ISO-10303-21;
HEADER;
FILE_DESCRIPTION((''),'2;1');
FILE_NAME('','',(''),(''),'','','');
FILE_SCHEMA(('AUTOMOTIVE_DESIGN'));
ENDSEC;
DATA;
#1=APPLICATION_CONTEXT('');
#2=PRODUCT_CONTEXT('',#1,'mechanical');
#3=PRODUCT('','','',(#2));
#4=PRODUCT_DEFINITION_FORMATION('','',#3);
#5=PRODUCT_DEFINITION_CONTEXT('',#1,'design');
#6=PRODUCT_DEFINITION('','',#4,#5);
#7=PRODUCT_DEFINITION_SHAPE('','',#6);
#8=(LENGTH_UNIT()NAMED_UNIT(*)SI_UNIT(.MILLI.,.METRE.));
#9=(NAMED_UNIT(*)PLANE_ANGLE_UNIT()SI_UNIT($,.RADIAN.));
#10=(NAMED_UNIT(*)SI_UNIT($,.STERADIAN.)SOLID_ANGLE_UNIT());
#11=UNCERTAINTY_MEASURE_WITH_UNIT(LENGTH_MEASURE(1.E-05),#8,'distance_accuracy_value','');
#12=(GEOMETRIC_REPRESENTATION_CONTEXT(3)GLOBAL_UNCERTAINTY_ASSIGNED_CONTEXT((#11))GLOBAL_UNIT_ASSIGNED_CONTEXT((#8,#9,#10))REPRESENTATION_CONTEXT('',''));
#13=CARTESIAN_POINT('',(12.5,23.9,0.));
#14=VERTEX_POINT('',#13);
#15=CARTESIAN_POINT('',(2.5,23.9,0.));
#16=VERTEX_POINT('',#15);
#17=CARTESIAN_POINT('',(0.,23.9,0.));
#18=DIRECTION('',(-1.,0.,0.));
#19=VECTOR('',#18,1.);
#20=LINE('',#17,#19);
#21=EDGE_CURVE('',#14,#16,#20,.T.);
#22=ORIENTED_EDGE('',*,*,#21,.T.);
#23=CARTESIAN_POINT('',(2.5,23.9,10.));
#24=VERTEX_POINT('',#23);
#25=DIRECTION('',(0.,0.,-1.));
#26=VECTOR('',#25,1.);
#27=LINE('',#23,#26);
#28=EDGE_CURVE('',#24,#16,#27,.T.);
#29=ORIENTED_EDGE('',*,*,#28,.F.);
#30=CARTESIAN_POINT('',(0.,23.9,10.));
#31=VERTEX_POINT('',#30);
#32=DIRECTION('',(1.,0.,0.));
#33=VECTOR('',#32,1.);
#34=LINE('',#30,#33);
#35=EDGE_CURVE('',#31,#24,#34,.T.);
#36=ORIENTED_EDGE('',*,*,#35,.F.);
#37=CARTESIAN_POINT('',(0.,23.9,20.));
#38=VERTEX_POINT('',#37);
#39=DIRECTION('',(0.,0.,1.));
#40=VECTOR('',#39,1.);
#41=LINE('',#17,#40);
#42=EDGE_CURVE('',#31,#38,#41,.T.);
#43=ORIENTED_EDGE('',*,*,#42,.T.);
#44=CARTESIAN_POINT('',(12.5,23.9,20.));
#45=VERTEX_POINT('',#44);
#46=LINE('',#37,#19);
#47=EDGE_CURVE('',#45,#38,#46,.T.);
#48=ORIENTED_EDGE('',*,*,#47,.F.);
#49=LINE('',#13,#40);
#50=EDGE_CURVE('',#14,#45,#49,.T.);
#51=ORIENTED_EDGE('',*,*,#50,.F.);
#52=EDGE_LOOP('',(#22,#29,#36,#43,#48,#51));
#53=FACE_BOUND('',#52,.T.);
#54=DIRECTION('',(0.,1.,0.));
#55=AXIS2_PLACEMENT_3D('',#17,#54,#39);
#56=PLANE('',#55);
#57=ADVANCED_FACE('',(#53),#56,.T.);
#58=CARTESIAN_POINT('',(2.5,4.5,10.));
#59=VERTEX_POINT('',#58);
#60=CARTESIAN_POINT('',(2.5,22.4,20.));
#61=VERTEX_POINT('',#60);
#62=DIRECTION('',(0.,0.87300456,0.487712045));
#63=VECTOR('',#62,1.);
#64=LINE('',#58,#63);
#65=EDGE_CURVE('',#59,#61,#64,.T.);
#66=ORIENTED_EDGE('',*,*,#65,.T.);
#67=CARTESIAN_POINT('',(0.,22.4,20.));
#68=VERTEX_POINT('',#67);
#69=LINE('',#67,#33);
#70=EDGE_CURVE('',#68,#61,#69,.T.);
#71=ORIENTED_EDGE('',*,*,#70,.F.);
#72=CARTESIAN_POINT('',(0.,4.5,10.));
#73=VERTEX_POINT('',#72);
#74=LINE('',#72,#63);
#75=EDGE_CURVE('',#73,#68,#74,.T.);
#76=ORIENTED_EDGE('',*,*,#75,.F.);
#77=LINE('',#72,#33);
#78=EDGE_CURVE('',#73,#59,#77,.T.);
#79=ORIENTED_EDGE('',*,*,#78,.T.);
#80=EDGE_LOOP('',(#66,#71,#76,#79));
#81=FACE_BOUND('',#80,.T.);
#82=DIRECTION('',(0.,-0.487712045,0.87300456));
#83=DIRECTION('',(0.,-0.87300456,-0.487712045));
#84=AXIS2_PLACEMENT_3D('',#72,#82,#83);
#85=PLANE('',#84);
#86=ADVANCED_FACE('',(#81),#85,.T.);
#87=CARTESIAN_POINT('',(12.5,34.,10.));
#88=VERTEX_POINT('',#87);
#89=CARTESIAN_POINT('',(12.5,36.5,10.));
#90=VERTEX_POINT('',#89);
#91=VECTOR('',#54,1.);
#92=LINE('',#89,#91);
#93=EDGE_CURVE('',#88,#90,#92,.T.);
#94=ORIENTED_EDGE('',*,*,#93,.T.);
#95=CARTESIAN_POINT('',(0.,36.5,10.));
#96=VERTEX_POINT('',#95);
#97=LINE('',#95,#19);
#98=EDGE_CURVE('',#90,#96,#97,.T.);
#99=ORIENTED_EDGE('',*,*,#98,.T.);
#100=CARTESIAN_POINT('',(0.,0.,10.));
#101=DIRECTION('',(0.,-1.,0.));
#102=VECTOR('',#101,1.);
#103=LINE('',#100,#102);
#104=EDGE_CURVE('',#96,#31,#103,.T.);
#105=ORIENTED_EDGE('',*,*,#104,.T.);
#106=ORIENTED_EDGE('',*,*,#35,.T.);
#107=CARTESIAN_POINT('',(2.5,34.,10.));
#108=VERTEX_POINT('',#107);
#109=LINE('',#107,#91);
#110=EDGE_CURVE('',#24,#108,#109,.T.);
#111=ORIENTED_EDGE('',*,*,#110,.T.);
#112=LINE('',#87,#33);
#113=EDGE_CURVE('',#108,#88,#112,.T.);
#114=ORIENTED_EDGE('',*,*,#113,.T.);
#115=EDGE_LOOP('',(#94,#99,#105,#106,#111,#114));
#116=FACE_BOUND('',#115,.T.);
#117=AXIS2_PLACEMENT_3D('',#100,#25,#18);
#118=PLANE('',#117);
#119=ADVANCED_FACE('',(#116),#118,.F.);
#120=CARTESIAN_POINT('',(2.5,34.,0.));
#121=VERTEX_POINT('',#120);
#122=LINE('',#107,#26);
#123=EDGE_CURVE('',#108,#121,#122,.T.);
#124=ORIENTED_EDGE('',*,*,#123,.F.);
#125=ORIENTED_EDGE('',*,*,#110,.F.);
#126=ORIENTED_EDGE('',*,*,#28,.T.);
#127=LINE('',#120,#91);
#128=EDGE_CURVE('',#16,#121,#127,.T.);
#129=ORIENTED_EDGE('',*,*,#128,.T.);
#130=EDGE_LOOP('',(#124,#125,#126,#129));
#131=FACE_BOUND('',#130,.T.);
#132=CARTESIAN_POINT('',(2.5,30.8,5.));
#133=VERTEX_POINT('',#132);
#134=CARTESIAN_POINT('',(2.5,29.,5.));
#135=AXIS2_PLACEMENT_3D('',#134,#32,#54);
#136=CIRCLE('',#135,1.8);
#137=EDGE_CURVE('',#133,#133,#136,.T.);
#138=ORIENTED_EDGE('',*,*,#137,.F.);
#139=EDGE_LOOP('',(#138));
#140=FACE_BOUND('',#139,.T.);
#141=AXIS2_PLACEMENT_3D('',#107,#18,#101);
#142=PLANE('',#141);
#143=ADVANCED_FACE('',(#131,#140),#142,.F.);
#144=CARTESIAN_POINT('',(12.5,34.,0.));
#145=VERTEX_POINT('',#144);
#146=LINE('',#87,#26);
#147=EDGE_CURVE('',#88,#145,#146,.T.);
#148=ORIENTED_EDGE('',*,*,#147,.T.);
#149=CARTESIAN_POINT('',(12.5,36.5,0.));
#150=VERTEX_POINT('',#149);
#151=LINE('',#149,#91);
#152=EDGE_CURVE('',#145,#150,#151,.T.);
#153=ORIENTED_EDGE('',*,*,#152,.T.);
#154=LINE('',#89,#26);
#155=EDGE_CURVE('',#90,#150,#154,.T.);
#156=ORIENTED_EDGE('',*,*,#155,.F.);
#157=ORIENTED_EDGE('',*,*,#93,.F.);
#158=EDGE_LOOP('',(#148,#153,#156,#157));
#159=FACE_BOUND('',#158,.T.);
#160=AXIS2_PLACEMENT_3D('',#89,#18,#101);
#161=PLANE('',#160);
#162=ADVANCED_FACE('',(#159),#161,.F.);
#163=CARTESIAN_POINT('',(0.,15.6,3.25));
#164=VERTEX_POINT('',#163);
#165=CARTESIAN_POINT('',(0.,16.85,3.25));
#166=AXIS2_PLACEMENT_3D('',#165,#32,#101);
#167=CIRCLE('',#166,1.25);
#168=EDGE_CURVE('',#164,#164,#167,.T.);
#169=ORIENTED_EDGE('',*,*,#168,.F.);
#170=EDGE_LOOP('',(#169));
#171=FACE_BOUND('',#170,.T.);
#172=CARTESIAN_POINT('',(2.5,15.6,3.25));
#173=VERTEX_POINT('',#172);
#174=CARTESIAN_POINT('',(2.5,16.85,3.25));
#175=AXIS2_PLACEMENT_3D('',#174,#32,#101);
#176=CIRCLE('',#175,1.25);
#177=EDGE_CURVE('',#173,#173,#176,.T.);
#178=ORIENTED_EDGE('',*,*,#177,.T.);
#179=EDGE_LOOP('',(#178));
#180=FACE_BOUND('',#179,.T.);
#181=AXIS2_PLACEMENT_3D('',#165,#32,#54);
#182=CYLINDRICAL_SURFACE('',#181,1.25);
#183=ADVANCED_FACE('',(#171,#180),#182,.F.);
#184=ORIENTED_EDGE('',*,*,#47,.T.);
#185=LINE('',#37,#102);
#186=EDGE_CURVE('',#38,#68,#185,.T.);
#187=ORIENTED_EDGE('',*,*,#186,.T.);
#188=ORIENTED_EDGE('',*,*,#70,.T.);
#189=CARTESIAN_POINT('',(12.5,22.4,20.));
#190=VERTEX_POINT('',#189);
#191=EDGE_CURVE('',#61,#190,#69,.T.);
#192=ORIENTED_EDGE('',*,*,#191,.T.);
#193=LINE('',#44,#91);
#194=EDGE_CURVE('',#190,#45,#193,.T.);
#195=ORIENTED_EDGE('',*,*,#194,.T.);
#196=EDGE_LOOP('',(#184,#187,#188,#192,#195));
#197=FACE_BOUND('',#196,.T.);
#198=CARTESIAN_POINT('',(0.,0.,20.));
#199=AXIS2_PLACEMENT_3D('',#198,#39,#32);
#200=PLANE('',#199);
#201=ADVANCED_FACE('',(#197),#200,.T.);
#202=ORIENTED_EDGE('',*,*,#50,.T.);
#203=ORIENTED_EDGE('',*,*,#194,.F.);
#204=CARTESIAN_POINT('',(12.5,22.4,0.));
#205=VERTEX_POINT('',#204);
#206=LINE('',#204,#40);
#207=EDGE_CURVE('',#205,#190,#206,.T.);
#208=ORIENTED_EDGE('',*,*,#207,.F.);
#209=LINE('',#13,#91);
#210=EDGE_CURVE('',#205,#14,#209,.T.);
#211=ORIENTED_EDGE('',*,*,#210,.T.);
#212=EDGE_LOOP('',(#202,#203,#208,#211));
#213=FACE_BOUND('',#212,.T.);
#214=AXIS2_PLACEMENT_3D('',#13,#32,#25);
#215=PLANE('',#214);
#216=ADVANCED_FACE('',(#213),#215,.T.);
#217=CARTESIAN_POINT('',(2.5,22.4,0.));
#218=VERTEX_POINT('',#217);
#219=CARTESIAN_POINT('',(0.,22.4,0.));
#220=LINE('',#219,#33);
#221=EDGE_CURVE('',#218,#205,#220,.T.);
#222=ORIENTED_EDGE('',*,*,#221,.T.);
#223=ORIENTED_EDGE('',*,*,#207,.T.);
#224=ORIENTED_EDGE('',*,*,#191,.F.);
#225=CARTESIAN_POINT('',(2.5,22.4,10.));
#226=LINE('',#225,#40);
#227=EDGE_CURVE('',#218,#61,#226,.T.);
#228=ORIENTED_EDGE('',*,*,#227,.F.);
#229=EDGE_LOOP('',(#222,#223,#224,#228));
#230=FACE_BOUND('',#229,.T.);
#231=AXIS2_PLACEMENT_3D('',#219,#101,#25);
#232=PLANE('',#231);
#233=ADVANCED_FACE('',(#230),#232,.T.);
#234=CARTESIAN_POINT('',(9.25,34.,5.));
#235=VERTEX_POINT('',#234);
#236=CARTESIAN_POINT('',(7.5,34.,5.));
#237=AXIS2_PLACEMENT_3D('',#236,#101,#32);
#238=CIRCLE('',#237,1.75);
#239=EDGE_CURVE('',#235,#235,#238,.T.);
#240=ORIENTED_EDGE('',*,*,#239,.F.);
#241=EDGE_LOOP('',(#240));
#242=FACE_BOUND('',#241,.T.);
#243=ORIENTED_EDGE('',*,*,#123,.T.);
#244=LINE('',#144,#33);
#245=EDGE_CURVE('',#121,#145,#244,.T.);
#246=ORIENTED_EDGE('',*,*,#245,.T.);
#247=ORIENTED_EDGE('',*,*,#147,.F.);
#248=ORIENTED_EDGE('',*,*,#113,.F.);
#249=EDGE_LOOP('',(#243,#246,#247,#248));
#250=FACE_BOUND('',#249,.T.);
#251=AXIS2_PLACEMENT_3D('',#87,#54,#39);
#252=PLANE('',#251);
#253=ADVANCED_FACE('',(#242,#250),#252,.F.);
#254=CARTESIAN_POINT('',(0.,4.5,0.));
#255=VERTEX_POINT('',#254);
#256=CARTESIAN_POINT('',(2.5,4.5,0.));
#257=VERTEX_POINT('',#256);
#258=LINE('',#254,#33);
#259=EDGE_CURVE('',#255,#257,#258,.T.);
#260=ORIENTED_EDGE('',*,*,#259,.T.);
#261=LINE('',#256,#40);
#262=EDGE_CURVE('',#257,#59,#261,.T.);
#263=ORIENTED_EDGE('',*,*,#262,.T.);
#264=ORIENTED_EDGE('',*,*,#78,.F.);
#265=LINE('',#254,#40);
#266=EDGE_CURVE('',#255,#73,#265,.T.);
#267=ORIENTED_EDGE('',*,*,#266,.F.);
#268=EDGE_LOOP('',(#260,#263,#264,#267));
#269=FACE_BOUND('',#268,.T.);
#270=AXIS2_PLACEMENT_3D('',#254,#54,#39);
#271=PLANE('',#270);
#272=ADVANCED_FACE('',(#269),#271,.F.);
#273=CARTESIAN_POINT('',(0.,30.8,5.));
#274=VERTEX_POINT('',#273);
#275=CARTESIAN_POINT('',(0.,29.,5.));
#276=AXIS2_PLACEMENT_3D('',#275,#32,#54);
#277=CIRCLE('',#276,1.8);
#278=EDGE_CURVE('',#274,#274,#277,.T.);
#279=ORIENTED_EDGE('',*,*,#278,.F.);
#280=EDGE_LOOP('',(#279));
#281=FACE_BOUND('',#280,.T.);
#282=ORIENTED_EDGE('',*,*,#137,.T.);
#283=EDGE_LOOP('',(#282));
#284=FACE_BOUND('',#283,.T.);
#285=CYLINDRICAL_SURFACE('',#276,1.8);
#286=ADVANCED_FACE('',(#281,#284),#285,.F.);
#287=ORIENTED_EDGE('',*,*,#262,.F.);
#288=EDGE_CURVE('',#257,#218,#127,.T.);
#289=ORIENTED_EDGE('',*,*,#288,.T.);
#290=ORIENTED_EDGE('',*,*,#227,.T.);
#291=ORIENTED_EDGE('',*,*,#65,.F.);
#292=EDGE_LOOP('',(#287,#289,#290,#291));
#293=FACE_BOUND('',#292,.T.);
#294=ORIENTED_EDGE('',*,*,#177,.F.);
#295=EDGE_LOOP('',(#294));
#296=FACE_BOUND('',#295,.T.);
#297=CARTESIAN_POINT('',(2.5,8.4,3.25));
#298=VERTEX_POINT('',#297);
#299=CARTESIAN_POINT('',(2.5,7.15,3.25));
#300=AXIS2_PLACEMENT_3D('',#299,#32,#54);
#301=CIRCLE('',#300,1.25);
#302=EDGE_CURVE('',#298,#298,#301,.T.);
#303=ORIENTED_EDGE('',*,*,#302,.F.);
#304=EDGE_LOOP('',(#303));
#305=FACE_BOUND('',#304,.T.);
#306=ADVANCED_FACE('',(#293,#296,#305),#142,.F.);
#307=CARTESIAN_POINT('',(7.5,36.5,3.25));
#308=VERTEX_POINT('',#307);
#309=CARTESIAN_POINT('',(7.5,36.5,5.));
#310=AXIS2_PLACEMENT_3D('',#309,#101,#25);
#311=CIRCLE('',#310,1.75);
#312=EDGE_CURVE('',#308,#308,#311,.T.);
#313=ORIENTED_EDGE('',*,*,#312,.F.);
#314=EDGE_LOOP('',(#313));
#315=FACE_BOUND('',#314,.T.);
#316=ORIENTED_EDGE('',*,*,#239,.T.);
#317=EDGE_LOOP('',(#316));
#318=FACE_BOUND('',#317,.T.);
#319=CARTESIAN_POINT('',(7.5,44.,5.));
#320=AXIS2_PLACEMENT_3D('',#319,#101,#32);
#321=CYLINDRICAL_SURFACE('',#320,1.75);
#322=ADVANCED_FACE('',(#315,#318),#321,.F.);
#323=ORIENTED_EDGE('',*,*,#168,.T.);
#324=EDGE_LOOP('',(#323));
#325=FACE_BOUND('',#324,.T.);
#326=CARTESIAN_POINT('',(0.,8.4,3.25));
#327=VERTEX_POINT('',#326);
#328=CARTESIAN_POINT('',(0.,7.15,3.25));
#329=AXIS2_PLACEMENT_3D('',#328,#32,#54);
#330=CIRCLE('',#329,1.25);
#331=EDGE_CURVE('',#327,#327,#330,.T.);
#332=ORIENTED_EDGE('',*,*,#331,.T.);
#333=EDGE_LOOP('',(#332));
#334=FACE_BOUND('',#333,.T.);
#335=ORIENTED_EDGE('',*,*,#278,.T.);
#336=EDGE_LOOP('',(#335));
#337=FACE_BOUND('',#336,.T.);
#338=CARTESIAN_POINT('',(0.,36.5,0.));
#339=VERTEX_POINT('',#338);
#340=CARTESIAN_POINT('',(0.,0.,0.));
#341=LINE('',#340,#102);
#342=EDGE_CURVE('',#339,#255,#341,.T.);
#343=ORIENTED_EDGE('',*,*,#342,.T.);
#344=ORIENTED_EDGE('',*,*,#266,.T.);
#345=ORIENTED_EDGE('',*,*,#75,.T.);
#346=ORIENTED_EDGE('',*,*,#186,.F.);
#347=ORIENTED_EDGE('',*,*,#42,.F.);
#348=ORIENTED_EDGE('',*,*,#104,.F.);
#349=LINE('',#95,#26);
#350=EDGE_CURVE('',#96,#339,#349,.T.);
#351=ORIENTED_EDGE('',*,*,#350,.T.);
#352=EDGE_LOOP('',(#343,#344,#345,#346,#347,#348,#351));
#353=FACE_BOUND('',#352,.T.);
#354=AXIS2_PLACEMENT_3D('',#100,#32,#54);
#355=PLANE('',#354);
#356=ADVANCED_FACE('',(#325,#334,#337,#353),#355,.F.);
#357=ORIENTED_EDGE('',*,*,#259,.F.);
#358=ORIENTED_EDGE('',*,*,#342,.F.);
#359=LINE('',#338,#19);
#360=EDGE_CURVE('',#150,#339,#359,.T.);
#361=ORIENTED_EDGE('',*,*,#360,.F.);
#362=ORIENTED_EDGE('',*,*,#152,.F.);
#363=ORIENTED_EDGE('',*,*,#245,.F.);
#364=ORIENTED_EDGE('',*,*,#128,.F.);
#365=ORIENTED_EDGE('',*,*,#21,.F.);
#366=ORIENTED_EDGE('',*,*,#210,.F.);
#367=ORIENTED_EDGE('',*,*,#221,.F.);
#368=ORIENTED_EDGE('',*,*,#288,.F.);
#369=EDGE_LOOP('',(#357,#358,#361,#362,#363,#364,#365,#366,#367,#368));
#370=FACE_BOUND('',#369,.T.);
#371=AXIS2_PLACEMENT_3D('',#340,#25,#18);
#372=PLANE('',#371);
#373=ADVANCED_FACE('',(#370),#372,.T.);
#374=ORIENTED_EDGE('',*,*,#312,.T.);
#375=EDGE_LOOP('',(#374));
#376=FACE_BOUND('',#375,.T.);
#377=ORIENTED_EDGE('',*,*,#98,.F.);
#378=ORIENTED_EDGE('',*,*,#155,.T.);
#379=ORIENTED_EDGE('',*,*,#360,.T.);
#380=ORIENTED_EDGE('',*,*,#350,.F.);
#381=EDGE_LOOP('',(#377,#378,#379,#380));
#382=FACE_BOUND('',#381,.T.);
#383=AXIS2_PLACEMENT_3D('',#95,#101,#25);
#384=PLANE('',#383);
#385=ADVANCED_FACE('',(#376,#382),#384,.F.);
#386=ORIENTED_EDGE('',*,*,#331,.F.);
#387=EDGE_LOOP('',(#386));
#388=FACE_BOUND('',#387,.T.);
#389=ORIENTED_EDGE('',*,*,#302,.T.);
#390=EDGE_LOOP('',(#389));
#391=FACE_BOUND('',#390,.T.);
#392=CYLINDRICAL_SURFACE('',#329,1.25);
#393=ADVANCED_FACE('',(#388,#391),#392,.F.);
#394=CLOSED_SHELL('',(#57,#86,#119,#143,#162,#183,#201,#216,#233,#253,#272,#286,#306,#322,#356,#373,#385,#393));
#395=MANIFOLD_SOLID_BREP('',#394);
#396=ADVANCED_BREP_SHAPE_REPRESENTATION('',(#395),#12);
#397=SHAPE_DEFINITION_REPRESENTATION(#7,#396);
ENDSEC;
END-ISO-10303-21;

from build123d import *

# Parameters (mm, degrees)
BOSS_EXTRUDE1_DEPTH      = 10
SKETCH2_R                = 1.75
CUT_EXTRUDE1_DEPTH       = 10
SKETCH3_R                = 1.25
SKETCH3_R_2              = 1.8
CUT_EXTRUDE2_DEPTH       = 40.143965052
SKETCH4_W                = 13.022509218
SKETCH4_H                = 4.5
CUT_EXTRUDE3_DEPTH       = 40.143965052
BOSS_EXTRUDE2_DEPTH      = 10
BOSS_EXTRUDE2_DEPTH_BACK = 10
SKETCH5_W                = 12.5
SKETCH5_H                = 1.5
LOFT2_DEPTH              = 2.5


# Read off the part's stored shape, not the designer's step: Loft2
with BuildPart() as part:
    # Sketch1 → Boss-Extrude1 (new body)
    with BuildSketch(Plane.XY):
        Polygon((0, 0), (0, 36.5), (12.5, 36.5), (12.5, 34), (2.5, 34), (2.5, 0), align=None)
    extrude(amount=BOSS_EXTRUDE1_DEPTH)

    # Sketch2 → Cut-Extrude1 (cut)
    with BuildSketch(Plane.XZ.offset(-34)):
        with Locations((7.5, 5)):
            Circle(SKETCH2_R)
    extrude(amount=-CUT_EXTRUDE1_DEPTH, mode=Mode.SUBTRACT)

    # Sketch3 → Cut-Extrude2 (cut, through all)
    with BuildSketch(Plane(origin=(2.5, 0, 0), x_dir=(0, 0, -1), z_dir=(1, 0, 0))):
        with Locations(Location((-3.25, 7.15, 0), (0, 0, 90))):
            Circle(SKETCH3_R)
        with Locations(Location((-3.25, 16.85, 0), (0, 0, 270))):
            Circle(SKETCH3_R)
        with Locations(Location((-5, 29, 0), (0, 0, 90))):
            Circle(SKETCH3_R_2)
    extrude(amount=-CUT_EXTRUDE2_DEPTH, mode=Mode.SUBTRACT)

    # Sketch4 → Cut-Extrude3 (cut, through all)
    with BuildSketch(Plane(origin=(2.5, 0, 0), x_dir=(0, 0, -1), z_dir=(1, 0, 0))):
        with Locations((-6.511254609, 2.25)):
            Rectangle(SKETCH4_W, SKETCH4_H)
    extrude(amount=-CUT_EXTRUDE3_DEPTH, mode=Mode.SUBTRACT)

    # Sketch5 → Boss-Extrude2 (add, two sides: drawn at the far end of the back side and taken through both)
    with BuildSketch(Plane.XY.offset(10).offset(-BOSS_EXTRUDE2_DEPTH_BACK)):
        with Locations((6.25, 23.15)):
            Rectangle(SKETCH5_W, SKETCH5_H)
    extrude(amount=BOSS_EXTRUDE2_DEPTH + BOSS_EXTRUDE2_DEPTH_BACK)

    # Loft2 outline → Loft2 (add)
    with BuildSketch(Plane.YZ):
        Polygon((22.4, 10), (22.4, 20), (4.5, 10), align=None)
    extrude(amount=LOFT2_DEPTH)


solid = part.part
